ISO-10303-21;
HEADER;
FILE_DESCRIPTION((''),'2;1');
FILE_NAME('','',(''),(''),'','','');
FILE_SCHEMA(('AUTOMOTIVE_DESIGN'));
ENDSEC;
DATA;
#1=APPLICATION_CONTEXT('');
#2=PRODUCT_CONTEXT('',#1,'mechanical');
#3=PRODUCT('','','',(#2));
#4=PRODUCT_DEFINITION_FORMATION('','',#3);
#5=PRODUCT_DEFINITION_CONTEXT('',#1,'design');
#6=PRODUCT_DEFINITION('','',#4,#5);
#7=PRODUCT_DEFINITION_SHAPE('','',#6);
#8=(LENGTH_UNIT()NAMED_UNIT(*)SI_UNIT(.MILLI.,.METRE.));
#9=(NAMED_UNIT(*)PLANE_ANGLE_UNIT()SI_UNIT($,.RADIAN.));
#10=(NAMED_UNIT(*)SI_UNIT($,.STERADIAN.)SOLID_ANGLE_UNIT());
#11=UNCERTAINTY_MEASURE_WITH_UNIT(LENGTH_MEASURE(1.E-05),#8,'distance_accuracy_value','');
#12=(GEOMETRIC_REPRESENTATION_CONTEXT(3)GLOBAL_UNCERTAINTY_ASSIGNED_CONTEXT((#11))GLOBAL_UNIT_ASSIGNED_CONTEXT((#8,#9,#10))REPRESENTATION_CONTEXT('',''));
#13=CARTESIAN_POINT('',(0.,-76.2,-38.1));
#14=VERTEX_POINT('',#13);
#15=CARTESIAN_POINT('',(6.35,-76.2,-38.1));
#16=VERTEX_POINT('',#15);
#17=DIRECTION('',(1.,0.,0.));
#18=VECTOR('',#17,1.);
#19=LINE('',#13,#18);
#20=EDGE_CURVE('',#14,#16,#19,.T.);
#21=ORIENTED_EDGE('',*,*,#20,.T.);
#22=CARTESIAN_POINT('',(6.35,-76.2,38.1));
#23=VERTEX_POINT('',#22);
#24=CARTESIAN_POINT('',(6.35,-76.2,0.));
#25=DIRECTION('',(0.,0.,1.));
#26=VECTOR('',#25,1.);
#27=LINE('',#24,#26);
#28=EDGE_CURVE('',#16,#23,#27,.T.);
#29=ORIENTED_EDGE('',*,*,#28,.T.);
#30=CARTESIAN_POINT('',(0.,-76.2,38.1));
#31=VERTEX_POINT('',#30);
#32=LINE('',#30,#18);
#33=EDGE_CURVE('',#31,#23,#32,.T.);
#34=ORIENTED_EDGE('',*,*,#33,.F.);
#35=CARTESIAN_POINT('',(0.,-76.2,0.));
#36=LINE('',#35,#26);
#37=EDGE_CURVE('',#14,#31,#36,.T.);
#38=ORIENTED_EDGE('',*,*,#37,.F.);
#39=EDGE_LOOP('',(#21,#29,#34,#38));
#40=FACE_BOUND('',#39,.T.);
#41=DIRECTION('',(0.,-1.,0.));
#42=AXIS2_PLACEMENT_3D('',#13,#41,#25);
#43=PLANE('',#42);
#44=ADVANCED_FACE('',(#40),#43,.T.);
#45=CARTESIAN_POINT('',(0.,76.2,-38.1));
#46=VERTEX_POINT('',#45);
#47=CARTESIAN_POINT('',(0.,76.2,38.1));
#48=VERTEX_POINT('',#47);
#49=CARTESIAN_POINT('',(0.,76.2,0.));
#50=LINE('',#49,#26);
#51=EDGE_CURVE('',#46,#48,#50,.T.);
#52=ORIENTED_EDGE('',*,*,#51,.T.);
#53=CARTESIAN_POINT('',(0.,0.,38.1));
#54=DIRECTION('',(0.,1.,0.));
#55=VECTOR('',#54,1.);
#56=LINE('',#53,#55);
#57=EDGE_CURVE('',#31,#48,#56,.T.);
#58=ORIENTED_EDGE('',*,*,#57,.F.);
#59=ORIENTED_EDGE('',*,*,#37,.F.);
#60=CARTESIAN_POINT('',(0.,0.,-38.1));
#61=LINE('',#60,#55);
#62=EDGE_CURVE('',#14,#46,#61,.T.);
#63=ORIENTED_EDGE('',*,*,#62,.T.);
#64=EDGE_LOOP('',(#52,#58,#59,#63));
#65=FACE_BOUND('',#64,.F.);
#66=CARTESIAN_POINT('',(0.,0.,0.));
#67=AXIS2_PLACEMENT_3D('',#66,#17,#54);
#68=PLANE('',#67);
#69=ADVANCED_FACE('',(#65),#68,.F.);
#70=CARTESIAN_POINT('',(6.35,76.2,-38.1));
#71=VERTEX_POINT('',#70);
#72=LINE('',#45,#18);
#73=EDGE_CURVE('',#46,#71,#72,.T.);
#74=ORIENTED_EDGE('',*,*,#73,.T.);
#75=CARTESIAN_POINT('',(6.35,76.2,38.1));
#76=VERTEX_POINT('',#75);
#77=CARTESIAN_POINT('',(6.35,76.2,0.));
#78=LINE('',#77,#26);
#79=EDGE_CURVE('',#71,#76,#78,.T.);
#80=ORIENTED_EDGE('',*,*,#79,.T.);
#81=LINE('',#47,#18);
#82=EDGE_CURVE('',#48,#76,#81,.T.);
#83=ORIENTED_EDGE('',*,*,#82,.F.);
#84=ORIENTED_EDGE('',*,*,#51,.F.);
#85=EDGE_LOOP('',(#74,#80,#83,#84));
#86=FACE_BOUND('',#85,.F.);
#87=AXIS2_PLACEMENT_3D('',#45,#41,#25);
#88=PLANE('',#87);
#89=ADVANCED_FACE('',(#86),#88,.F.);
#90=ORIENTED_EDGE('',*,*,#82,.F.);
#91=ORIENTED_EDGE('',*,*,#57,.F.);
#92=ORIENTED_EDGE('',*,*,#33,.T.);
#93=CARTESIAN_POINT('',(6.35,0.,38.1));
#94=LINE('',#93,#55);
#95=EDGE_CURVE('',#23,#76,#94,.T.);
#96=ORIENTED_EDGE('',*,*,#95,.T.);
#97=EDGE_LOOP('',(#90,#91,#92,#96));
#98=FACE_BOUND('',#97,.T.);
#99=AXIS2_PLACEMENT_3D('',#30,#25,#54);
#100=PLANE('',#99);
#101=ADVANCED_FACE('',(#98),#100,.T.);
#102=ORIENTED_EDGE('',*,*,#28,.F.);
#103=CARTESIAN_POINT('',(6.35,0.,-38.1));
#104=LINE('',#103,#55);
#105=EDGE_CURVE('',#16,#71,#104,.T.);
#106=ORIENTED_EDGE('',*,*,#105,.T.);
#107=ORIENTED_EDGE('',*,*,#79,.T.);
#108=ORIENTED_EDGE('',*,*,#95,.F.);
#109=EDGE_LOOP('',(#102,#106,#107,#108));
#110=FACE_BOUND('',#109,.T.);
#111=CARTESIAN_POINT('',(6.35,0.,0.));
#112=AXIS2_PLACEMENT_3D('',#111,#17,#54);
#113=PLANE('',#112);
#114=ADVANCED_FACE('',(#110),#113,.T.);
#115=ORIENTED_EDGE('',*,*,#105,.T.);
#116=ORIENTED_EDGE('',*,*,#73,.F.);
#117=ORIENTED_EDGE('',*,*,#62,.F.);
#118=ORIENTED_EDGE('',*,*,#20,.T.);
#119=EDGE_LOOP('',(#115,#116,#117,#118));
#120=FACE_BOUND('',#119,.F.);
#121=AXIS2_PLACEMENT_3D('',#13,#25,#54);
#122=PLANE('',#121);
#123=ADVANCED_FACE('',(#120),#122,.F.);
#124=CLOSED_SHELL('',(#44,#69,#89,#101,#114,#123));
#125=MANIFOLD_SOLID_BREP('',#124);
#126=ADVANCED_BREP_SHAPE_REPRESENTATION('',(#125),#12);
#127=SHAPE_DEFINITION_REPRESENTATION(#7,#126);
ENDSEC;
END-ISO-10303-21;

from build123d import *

# Parameters (mm, degrees)
F0_W     = 152.4
F0_H     = 76.2
F1_DEPTH = 6.35


# Not quite as in the source:
# - a length typed as a fraction of an inch, garbled in the dataset ("3 / 203.2 mm" for 3/8 in), is restored


with BuildPart() as f1:
    # F0 (on Right) → F1 (new body)
    with BuildSketch(Plane.YZ):
        Rectangle(F0_W, F0_H)
    extrude(amount=F1_DEPTH)


solid = f1.part
